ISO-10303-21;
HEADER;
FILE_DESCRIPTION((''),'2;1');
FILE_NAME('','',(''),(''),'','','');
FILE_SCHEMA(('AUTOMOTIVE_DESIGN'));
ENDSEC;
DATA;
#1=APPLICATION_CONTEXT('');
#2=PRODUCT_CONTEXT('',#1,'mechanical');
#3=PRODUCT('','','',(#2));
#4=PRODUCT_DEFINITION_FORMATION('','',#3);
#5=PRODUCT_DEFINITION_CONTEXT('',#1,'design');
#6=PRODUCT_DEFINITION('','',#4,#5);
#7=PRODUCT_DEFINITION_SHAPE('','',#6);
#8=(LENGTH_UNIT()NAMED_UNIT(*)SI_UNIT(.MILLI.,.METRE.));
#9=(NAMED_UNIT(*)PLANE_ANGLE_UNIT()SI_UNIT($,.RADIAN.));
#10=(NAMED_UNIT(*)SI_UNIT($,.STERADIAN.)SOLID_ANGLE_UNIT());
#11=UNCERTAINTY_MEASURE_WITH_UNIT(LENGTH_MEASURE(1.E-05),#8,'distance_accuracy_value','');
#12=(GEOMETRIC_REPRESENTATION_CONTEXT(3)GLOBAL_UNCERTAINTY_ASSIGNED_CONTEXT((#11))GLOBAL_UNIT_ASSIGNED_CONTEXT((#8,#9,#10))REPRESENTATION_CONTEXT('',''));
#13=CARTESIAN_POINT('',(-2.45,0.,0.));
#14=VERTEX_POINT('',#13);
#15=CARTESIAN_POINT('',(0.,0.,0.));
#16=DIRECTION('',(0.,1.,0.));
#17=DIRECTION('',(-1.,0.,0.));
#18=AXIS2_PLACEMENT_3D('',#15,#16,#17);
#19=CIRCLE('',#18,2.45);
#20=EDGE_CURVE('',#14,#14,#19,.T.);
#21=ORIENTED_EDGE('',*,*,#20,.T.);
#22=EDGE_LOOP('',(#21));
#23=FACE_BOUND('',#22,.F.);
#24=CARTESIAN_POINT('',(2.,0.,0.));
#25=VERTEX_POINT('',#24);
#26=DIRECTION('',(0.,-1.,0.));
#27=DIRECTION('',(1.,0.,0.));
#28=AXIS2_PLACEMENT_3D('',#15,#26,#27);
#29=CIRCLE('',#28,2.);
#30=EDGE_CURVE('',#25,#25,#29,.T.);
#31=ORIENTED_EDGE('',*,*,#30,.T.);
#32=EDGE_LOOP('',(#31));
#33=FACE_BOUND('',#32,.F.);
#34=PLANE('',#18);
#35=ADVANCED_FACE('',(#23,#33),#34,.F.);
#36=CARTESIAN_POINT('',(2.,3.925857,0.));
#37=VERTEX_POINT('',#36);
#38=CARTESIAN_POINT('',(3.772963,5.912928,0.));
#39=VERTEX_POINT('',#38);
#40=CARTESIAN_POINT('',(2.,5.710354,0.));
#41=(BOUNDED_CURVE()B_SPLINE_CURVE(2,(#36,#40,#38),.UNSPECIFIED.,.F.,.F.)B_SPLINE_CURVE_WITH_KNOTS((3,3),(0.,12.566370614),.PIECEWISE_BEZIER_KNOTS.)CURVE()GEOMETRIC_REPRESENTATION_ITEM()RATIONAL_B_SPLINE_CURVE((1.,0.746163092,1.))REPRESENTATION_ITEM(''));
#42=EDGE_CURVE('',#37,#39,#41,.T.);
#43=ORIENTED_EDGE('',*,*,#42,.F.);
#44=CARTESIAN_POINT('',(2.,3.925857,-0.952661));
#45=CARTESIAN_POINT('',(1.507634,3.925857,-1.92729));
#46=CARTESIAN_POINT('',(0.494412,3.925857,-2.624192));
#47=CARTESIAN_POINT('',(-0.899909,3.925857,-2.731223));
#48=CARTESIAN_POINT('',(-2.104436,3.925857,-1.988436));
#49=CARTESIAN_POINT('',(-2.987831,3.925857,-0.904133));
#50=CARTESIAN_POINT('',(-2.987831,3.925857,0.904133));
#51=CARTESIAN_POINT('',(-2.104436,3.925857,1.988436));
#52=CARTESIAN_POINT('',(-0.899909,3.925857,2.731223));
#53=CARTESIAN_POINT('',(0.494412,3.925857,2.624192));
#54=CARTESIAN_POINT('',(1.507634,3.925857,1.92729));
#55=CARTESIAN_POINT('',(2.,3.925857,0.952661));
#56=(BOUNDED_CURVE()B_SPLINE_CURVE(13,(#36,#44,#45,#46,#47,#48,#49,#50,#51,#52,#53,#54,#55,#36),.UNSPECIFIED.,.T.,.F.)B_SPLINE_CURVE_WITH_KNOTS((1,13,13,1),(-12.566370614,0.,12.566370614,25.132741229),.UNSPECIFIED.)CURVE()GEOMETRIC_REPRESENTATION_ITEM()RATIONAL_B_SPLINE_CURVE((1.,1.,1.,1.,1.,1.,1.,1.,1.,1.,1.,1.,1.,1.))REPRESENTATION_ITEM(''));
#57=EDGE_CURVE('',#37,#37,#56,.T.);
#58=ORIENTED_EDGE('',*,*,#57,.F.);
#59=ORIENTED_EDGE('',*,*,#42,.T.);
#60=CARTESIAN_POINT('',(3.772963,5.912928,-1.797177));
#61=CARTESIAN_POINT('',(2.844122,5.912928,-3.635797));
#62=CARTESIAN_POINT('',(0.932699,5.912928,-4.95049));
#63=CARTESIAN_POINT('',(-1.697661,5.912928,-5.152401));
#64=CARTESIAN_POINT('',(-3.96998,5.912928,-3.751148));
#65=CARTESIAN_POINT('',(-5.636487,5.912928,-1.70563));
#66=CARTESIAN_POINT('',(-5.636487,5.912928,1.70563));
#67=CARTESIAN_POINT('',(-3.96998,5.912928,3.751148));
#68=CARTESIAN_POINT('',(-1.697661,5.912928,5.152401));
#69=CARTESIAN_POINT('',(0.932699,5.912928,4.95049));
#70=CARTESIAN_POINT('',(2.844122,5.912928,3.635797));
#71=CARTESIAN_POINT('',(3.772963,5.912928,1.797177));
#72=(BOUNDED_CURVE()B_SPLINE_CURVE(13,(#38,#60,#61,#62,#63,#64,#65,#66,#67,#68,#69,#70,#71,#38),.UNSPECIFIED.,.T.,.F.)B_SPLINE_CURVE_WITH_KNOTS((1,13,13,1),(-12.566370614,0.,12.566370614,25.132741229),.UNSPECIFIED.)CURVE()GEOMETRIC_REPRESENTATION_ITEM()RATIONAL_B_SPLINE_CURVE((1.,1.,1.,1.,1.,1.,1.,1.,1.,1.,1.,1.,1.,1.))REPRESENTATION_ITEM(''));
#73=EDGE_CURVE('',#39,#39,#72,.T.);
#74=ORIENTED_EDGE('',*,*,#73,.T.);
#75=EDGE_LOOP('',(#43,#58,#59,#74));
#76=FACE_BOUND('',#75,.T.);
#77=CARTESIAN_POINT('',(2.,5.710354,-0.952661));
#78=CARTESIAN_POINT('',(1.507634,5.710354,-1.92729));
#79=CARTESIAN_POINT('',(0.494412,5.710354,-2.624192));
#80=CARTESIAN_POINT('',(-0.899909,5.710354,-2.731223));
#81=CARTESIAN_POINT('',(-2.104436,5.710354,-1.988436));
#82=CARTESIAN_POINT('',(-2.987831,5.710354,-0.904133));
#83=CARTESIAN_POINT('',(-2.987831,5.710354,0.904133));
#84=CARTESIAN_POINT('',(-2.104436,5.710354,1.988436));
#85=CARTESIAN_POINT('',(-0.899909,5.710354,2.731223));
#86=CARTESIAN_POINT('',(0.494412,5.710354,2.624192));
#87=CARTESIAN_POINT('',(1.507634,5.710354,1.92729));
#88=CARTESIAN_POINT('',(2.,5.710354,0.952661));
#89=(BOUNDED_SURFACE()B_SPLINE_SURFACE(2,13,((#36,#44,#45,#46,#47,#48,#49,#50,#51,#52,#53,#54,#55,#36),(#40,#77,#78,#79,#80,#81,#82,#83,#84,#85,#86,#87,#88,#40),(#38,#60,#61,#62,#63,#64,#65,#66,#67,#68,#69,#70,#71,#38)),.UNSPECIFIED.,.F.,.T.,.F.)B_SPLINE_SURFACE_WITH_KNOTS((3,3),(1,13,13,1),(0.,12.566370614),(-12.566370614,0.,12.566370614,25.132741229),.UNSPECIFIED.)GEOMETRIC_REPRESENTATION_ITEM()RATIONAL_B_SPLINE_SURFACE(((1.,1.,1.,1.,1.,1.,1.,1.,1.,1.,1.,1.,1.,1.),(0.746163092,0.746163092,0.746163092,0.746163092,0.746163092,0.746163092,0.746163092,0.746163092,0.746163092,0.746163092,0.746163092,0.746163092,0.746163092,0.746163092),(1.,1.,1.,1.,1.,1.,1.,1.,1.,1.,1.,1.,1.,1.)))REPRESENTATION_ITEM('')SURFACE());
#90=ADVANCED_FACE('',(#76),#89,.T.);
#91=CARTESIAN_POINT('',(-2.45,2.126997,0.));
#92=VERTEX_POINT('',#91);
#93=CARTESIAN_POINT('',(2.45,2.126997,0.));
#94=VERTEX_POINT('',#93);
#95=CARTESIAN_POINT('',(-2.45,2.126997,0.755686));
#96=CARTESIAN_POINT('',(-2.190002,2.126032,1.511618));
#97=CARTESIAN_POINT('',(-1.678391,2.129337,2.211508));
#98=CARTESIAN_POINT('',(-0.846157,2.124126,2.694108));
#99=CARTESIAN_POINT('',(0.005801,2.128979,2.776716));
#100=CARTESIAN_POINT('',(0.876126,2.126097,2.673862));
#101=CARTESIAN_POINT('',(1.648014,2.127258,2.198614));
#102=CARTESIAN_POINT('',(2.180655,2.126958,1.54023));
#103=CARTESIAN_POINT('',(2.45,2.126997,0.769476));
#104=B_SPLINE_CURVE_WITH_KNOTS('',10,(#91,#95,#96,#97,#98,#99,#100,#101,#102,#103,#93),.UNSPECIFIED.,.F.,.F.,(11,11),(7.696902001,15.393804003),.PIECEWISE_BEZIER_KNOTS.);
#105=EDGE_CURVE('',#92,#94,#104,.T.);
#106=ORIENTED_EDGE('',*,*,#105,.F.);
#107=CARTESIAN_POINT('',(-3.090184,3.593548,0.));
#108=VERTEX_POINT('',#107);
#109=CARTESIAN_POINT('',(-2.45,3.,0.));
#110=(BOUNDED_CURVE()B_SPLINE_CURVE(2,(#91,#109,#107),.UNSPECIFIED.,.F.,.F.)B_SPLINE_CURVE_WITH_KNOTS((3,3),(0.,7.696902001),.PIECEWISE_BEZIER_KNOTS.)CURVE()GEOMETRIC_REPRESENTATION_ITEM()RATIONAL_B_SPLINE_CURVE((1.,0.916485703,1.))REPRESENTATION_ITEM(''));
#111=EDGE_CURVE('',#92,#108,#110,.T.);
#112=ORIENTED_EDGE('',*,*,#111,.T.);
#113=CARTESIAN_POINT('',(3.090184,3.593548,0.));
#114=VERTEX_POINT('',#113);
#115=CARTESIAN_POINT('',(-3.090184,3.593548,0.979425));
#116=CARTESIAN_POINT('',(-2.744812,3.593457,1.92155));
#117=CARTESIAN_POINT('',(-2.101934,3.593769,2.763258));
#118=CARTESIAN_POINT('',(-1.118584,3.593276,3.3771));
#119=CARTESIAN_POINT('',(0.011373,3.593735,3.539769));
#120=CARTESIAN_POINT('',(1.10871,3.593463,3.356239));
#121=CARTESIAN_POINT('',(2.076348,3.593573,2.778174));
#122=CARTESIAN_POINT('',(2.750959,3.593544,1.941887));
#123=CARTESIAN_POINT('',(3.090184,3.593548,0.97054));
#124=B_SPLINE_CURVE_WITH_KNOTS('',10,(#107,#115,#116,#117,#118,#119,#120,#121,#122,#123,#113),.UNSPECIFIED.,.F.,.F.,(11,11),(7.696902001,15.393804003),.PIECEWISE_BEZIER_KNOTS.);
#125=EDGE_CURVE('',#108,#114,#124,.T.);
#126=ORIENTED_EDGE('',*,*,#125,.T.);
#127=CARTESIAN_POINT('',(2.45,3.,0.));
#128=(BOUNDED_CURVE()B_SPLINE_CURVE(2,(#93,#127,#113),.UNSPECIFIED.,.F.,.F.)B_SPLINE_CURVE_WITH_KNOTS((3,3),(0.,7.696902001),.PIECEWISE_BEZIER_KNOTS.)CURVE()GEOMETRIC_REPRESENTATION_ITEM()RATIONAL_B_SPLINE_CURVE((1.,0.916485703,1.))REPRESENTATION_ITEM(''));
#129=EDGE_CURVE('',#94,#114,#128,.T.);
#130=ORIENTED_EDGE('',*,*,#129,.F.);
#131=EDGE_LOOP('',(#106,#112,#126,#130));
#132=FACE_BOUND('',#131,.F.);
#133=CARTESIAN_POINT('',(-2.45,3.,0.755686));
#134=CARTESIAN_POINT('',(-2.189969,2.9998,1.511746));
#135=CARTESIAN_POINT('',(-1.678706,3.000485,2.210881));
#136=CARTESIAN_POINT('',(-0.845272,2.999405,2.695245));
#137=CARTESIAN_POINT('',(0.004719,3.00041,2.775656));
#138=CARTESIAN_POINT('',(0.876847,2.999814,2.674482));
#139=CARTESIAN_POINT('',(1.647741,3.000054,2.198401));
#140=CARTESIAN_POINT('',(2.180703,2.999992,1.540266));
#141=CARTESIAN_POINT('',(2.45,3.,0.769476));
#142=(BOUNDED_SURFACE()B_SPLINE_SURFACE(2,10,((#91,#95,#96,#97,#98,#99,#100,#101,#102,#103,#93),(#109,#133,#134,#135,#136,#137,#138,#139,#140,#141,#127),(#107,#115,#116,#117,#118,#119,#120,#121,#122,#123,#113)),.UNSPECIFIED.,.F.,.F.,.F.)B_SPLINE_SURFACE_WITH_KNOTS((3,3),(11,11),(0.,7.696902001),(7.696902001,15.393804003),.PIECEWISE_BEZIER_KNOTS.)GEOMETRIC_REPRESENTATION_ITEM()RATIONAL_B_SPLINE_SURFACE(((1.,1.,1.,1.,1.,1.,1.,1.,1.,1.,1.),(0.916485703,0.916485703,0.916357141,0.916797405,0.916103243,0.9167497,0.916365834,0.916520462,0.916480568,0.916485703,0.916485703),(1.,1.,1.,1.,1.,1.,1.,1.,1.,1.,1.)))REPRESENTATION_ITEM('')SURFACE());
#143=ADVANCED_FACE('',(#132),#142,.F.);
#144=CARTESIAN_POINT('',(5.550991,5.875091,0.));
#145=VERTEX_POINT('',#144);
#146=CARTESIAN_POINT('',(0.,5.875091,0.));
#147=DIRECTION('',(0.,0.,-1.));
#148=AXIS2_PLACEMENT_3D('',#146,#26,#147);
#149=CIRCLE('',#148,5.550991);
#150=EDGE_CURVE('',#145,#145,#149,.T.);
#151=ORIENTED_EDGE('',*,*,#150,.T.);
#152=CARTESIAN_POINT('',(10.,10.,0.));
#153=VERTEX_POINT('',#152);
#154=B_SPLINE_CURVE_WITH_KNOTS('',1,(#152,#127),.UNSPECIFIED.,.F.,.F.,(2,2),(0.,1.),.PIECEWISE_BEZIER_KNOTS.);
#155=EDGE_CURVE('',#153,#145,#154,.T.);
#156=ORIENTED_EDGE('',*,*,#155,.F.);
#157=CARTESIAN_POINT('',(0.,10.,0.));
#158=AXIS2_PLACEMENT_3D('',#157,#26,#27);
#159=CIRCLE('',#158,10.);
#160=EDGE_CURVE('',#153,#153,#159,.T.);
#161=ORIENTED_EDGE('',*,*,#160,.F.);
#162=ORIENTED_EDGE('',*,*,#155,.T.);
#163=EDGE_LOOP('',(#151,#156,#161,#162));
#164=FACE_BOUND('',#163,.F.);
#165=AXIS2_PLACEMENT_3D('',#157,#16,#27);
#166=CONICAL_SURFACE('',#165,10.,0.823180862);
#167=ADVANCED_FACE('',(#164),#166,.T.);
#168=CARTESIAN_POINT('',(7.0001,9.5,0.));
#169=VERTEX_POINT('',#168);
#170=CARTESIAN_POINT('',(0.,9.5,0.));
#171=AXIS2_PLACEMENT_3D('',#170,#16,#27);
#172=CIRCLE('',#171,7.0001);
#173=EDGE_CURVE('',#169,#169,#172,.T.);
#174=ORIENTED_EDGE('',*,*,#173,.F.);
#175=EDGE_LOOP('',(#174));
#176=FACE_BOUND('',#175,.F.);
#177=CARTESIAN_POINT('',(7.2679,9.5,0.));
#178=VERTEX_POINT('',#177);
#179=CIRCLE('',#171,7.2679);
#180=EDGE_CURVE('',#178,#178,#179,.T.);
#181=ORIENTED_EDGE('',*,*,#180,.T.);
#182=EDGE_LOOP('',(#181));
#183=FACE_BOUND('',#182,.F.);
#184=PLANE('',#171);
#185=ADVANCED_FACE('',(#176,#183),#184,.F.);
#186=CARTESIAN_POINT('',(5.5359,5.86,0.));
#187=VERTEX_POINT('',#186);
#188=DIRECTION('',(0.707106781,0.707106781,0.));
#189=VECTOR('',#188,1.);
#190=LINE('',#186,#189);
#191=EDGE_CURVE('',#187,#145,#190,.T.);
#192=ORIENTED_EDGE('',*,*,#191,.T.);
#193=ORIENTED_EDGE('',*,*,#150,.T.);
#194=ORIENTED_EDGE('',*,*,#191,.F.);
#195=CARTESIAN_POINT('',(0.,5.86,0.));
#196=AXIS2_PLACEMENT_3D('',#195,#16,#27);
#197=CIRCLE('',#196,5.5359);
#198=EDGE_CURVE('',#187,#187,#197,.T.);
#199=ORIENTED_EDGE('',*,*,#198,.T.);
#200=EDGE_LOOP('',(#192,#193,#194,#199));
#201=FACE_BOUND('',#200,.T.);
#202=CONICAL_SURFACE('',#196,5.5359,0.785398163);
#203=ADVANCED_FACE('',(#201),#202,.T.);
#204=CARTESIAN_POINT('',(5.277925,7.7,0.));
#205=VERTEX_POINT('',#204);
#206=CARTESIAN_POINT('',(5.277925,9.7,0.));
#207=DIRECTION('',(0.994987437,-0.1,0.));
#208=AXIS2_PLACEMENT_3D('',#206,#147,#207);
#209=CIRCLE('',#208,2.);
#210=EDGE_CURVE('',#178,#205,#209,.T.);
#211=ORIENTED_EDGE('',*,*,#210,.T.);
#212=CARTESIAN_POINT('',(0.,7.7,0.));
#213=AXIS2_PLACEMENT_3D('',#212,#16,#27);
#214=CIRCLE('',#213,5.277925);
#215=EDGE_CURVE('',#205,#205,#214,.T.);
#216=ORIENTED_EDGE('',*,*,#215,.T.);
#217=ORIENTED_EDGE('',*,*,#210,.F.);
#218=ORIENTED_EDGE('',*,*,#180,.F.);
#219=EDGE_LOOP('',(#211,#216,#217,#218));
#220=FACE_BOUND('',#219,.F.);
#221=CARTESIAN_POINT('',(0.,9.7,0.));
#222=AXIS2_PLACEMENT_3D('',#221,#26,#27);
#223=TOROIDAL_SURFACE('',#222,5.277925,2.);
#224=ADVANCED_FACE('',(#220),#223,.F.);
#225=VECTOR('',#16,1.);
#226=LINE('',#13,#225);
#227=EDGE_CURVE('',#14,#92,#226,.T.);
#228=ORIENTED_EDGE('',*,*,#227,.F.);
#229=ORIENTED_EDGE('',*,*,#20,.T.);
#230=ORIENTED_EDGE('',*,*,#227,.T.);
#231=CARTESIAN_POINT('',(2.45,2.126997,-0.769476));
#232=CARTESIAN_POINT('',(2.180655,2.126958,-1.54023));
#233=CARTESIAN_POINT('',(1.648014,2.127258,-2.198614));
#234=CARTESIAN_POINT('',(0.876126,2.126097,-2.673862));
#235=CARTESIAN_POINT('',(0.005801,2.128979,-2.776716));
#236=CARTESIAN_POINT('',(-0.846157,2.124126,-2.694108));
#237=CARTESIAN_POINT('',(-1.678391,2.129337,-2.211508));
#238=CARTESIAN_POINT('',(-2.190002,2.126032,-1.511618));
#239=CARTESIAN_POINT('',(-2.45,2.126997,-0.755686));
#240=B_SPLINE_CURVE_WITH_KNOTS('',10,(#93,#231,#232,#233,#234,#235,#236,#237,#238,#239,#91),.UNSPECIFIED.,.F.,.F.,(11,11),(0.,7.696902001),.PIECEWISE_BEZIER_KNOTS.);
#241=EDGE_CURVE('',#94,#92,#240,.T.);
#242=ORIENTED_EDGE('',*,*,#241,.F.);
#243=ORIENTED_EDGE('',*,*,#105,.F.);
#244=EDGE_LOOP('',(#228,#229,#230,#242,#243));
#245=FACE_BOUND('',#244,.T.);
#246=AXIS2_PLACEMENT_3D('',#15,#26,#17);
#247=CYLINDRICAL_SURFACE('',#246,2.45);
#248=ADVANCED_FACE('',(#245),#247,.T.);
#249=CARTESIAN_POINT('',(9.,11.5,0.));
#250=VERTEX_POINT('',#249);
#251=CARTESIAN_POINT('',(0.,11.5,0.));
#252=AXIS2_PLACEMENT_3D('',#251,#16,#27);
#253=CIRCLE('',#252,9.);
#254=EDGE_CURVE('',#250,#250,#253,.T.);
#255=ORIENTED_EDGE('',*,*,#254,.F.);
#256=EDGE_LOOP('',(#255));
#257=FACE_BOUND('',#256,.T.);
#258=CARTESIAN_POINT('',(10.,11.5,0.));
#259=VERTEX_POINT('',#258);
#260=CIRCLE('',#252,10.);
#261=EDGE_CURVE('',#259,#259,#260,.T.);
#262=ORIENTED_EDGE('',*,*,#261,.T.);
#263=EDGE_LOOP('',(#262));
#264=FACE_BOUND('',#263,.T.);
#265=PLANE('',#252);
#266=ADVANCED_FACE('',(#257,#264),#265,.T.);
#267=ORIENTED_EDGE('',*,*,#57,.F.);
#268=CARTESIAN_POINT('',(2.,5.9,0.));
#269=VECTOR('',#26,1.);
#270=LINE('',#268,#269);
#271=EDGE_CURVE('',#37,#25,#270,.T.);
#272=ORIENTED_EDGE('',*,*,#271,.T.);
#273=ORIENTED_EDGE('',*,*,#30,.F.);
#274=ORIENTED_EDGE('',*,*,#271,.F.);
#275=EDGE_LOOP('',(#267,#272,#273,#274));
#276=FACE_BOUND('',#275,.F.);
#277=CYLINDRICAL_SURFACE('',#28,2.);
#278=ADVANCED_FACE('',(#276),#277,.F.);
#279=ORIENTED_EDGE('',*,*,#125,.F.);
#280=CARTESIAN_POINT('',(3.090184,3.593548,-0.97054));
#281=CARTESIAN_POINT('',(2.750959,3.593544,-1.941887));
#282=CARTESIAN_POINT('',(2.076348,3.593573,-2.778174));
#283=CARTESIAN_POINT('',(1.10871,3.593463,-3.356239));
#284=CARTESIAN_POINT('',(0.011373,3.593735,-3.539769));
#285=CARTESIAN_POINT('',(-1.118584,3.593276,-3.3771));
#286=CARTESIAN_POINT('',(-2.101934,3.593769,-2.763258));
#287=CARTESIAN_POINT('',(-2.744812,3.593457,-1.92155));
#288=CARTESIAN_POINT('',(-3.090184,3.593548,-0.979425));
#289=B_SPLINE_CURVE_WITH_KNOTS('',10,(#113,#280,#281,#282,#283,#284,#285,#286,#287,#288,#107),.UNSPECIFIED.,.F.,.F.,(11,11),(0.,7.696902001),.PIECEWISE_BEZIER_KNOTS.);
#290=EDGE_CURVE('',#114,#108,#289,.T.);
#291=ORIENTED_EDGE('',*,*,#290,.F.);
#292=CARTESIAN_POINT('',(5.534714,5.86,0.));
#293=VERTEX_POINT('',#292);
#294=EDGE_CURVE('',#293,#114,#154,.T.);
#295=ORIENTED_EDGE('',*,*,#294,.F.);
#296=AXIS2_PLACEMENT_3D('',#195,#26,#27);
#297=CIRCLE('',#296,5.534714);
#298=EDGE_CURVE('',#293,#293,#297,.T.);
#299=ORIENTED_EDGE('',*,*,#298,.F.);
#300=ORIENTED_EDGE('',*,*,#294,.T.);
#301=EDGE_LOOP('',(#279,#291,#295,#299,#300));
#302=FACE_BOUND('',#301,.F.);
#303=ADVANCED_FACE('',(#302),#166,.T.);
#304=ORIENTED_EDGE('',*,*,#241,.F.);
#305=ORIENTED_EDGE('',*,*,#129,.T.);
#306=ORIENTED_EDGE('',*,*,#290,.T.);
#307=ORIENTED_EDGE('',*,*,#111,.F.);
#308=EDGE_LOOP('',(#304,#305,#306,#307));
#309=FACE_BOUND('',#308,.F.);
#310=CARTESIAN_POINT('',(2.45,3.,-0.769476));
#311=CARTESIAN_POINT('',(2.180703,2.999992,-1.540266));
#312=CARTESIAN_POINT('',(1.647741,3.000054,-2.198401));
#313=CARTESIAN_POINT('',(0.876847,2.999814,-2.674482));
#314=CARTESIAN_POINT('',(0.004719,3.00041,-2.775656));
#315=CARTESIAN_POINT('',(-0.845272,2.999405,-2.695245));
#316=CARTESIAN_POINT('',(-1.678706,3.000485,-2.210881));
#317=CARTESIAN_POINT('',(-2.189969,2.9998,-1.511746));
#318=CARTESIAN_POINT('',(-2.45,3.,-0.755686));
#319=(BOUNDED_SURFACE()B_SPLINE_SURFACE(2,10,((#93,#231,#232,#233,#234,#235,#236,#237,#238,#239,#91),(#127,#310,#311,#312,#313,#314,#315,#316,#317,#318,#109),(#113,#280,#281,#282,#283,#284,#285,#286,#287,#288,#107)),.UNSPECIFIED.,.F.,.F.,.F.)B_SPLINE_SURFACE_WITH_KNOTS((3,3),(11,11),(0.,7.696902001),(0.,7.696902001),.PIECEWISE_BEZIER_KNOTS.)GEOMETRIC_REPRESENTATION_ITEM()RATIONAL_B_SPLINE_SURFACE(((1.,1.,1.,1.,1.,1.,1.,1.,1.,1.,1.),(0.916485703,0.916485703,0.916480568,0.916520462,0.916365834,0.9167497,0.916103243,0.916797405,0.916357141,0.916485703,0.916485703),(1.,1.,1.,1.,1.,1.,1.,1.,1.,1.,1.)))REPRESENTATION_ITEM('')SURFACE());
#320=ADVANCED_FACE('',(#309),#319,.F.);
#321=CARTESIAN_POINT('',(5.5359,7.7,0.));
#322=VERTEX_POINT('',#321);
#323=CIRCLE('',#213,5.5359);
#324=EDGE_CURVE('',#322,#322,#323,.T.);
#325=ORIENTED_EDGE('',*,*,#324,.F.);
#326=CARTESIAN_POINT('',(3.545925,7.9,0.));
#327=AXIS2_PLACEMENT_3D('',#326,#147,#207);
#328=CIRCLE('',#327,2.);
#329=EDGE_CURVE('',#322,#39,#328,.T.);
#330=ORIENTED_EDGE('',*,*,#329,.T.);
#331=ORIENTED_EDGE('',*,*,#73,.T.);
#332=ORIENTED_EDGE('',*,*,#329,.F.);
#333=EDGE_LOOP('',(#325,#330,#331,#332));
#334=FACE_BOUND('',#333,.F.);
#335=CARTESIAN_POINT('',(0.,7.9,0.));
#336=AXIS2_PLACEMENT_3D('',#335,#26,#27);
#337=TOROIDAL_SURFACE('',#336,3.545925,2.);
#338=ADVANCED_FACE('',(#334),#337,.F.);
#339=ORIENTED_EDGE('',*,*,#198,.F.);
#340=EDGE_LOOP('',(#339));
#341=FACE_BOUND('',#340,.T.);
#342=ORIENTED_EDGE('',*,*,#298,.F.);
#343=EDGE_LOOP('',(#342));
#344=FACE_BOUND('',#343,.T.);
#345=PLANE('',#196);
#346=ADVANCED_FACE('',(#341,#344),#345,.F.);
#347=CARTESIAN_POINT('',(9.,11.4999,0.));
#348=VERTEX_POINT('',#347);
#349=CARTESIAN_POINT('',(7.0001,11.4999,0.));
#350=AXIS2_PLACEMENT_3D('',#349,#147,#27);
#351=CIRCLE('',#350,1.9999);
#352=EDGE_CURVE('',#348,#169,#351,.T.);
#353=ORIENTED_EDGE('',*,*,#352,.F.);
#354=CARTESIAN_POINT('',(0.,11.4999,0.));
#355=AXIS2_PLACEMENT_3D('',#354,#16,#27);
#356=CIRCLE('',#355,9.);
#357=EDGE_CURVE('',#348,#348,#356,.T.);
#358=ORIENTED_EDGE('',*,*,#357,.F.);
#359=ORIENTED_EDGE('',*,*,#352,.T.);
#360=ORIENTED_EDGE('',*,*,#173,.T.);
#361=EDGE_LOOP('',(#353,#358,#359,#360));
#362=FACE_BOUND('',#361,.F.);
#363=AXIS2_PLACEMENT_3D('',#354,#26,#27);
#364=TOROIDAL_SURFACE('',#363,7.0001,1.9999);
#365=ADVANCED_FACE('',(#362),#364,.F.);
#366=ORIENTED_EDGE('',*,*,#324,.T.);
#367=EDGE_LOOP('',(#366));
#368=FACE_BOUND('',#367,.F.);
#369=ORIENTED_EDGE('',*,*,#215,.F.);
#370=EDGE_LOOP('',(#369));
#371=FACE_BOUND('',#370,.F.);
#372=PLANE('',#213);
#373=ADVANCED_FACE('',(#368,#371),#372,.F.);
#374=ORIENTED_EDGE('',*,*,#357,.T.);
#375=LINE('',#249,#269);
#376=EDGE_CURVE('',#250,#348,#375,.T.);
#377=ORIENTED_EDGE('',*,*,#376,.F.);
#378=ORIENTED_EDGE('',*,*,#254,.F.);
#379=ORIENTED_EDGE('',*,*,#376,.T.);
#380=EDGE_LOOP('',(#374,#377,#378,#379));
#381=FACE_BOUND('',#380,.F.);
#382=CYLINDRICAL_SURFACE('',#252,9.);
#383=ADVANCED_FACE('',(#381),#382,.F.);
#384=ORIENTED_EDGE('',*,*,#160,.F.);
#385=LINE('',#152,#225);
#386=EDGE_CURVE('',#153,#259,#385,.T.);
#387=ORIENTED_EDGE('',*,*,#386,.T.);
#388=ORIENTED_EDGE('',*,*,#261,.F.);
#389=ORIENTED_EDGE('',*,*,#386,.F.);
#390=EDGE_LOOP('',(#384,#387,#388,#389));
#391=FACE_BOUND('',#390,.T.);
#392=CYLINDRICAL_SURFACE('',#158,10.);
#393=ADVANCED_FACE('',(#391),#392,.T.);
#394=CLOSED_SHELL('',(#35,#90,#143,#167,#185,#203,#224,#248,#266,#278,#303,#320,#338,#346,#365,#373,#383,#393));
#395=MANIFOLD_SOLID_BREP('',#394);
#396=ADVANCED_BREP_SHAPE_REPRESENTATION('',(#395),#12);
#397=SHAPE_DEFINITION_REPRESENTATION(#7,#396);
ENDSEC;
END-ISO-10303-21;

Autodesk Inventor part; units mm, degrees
ref_plane "YZ Plane" through (0, 0, 0) normal (1, 0, 0) x (0, 1, 0)
ref_plane "XZ Plane" through (0, 0, 0) normal (0, 1, 0) x (-1, 0, 0)
ref_plane "XY Plane" through (0, 0, 0) normal (0, 0, 1) x (1, 0, 0)
sketch "Эскиз1" plane through (0, 0, 0) normal (0, 1, 0) x (-1, 0, 0)
  circle A0 centre (0, 0) radius 2.45
  dimension "d0" = 4.9
extrude "Выдавливание1" add sketch "Эскиз1" along normal blind 3
ref_plane "РабПлоскость2" through (0, 10, 0) normal (0, 1, 0) x (1, 0, 0)
sketch "Эскиз2" plane through (0, 10, 0) normal (0, 1, 0) x (1, 0, 0)
  circle A0 centre (0, 0) radius 10
  dimension "d4" = 20
extrude "Выдавливание2" add sketch "Эскиз2" along normal blind 1.5
loft "Лофт1" add section 1 edges at (-10, 10, 0) section 2 edges at (2.45, 3, 0)
sketch "Эскиз3" plane through (0, 0, 0) normal (0, -1, 0) x (1, 0, 0)
  circle A0 centre (0, 0) radius 2.45 projected
  circle A1 centre (0, 0) radius 2
  dimension "d11" = 4
sketch "Эскиз4" plane through (0, 0, 0) normal (0, -1, 0) x (1, 0, 0)
  point P0 (0, 0)
extrude "Выдавливание3" cut sketch "Эскиз3" against normal blind 3 contours A1
sketch "Эскиз5" plane through (0, 11.5, 0) normal (0, 1, 0) x (1, 0, 0)
  circle A0 centre (0, 0) radius 9
  dimension "d14" = 18
extrude "Выдавливание4" cut sketch "Эскиз5" against normal blind 2
fillet "Сопряжение1" radius 2 3 edges at (-9, 9.5, 0) (0, 3, -2.45) (0, 3, 2.45)
sketch "Эскиз6" plane through (0, 9.5, 0) normal (0, 1, 0) x (1, 0, 0)
  circle A0 centre (0, 0) radius 7.2679
extrude "Выдавливание5" cut sketch "Эскиз6" against normal blind 1.8
fillet "Сопряжение2" radius 2 1 edges at (-7.2679, 7.7, 0)
sketch "Эскиз7" plane through (0, 7.7, 0) normal (0, 1, 0) x (1, 0, 0)
  circle A0 centre (0, 0) radius 5.5359
extrude "Выдавливание6" cut sketch "Эскиз7" against normal blind 1.8
fillet "Сопряжение3" radius 2 1 edges at (-5.5359, 5.9, 0)
sketch "Эскиз11" plane through (0, 5.9, 0) normal (0, 1, 0) x (1, 0, 0)
  circle A0 centre (0, 0) radius 2
extrude "Выдавливание10" cut sketch "Эскиз11" against normal blind 3.1
fillet "Сопряжение6" radius 2 1 edges at (-2, 5.9, 0)
properties part number "TubeExpander"
